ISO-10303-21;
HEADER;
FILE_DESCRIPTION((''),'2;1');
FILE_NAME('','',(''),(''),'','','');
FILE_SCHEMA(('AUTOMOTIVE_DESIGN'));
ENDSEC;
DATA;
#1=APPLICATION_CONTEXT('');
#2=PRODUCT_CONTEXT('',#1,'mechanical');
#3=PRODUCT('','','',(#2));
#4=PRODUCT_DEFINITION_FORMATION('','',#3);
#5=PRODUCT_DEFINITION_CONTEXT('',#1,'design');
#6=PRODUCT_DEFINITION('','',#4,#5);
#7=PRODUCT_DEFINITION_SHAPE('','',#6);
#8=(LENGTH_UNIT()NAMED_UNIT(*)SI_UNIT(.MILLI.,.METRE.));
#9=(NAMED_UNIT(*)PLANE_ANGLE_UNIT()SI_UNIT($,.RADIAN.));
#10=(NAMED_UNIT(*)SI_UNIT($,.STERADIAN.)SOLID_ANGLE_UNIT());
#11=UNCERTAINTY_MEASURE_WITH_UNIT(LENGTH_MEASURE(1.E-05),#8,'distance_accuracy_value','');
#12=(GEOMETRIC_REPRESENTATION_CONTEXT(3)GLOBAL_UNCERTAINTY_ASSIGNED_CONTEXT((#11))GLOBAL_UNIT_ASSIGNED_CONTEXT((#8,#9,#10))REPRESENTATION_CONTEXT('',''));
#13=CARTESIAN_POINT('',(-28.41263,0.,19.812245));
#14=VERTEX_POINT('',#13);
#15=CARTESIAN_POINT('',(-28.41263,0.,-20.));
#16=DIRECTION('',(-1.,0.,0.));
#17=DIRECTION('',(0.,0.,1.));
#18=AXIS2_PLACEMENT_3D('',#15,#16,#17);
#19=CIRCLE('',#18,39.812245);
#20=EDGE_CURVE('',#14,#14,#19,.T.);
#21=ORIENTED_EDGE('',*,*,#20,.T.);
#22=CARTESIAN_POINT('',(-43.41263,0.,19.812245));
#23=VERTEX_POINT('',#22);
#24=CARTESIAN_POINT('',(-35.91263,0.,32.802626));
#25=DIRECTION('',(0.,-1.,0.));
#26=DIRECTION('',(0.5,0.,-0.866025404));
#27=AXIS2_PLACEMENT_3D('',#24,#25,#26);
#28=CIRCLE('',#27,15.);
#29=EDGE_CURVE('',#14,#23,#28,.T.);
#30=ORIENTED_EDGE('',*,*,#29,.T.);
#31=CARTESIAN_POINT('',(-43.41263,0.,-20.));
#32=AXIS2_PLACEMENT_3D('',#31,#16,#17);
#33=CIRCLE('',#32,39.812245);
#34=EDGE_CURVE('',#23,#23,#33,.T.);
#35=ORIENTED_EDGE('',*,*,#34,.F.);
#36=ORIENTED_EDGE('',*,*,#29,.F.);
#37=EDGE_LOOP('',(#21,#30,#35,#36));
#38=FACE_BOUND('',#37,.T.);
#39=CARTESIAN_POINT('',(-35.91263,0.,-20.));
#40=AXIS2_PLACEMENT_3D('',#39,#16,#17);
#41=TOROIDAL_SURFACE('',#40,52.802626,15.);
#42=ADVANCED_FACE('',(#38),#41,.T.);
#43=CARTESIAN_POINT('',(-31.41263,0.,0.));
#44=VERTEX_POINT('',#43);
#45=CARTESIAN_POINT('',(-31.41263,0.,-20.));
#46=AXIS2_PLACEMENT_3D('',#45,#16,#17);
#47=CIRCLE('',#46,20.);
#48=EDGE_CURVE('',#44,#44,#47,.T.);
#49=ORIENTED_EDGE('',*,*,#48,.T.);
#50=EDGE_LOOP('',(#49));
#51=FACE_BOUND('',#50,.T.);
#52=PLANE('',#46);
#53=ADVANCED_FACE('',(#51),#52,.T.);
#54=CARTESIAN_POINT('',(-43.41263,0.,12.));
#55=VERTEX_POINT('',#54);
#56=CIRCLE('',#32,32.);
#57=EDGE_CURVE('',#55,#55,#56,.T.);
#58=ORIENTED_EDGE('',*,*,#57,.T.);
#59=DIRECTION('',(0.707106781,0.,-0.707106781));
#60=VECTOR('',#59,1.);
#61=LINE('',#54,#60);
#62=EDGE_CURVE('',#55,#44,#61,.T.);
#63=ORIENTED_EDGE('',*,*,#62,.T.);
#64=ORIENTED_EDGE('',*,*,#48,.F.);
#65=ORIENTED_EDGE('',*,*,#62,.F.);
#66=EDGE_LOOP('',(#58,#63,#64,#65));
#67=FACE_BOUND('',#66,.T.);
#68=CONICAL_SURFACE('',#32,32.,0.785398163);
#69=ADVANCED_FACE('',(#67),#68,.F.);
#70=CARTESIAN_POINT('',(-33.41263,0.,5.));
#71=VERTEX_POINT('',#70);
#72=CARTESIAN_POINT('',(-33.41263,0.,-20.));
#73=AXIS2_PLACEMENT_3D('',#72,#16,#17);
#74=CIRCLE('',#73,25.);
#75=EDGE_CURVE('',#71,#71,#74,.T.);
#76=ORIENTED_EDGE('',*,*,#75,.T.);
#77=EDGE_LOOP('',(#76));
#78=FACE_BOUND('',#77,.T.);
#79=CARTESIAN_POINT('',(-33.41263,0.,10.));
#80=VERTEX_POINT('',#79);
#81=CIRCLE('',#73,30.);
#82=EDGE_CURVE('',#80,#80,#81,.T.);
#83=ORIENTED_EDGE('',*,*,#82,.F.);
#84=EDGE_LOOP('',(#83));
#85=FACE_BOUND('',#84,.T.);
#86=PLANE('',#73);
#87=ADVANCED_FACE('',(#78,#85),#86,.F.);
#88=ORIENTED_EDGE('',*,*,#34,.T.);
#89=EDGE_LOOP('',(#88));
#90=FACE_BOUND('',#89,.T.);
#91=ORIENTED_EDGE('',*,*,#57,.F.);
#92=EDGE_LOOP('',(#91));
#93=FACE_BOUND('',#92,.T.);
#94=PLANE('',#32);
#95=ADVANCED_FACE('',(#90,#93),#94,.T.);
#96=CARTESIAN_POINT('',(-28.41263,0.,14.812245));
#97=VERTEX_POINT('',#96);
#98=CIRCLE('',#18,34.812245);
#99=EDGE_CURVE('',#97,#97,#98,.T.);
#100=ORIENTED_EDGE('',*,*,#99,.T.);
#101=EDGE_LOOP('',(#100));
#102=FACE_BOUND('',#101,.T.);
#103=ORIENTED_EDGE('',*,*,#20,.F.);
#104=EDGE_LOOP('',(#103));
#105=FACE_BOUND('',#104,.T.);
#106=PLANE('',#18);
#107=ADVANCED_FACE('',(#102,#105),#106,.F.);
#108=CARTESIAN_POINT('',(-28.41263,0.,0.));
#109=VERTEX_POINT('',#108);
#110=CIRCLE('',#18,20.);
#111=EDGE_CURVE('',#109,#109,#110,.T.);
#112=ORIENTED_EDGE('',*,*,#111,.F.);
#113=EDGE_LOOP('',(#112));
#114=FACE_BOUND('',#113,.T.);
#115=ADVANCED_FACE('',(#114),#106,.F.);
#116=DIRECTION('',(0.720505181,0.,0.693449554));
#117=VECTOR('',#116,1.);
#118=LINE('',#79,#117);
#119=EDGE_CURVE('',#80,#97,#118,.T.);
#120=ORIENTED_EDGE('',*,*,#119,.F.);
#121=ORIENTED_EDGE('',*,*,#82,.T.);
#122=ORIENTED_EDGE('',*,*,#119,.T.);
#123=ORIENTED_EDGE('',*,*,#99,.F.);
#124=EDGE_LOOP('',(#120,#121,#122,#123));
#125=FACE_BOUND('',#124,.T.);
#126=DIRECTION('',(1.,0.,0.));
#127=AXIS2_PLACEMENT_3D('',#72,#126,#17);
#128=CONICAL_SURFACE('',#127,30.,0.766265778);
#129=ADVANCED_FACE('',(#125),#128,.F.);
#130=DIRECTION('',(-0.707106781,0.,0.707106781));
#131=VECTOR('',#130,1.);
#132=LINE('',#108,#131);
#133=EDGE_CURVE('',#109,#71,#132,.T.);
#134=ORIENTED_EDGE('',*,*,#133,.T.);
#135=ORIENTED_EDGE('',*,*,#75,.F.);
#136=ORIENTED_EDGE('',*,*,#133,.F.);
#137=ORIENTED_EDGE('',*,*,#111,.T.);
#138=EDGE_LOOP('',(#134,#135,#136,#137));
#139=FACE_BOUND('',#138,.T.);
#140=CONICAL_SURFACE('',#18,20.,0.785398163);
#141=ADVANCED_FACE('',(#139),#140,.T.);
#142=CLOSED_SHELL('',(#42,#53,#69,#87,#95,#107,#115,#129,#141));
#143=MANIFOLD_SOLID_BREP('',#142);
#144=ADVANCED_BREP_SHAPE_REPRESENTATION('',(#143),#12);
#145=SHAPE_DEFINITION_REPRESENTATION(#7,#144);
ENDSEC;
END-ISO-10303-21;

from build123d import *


# Not quite as in the source:
# - a feature names something its author has since deleted; it is built from what else it names


with BuildPart() as f1:
    # F0 (on Front) → F1 (revolve)
    with BuildSketch(Plane.XZ):
        with BuildLine():
            Line((-28.4126295149, 14.8122454338), (-28.4126295149, 19.8122454338))
            ThreePointArc((-28.4126295149, 19.8122454338), (-35.9126295149, 47.8026264906), (-43.4126295149, 19.8122454338))
            Line((-43.4126295149, 19.8122454338), (-43.4126295149, 12))
            Line((-43.4126295149, 12), (-31.4126295149, 0))
            Line((-31.4126295149, 0), (-31.4126295149, -1.8659040798))
            Line((-31.4126295149, -1.8659040798), (-31.4126295149, -20))
            Line((-31.4126295149, -20), (-28.4126295149, -20))
            Line((-28.4126295149, -20), (-28.4126295149, 0))
            Line((-28.4126295149, 0), (-33.4126295149, 5))
            Line((-33.4126295149, 5), (-33.4126295149, 10))
            Line((-33.4126295149, 10), (-28.4126295149, 14.8122454338))
        make_face()
    revolve(axis=Axis((-29.9126295149, 0, -20), (-1, 0, 0)))


solid = f1.part
